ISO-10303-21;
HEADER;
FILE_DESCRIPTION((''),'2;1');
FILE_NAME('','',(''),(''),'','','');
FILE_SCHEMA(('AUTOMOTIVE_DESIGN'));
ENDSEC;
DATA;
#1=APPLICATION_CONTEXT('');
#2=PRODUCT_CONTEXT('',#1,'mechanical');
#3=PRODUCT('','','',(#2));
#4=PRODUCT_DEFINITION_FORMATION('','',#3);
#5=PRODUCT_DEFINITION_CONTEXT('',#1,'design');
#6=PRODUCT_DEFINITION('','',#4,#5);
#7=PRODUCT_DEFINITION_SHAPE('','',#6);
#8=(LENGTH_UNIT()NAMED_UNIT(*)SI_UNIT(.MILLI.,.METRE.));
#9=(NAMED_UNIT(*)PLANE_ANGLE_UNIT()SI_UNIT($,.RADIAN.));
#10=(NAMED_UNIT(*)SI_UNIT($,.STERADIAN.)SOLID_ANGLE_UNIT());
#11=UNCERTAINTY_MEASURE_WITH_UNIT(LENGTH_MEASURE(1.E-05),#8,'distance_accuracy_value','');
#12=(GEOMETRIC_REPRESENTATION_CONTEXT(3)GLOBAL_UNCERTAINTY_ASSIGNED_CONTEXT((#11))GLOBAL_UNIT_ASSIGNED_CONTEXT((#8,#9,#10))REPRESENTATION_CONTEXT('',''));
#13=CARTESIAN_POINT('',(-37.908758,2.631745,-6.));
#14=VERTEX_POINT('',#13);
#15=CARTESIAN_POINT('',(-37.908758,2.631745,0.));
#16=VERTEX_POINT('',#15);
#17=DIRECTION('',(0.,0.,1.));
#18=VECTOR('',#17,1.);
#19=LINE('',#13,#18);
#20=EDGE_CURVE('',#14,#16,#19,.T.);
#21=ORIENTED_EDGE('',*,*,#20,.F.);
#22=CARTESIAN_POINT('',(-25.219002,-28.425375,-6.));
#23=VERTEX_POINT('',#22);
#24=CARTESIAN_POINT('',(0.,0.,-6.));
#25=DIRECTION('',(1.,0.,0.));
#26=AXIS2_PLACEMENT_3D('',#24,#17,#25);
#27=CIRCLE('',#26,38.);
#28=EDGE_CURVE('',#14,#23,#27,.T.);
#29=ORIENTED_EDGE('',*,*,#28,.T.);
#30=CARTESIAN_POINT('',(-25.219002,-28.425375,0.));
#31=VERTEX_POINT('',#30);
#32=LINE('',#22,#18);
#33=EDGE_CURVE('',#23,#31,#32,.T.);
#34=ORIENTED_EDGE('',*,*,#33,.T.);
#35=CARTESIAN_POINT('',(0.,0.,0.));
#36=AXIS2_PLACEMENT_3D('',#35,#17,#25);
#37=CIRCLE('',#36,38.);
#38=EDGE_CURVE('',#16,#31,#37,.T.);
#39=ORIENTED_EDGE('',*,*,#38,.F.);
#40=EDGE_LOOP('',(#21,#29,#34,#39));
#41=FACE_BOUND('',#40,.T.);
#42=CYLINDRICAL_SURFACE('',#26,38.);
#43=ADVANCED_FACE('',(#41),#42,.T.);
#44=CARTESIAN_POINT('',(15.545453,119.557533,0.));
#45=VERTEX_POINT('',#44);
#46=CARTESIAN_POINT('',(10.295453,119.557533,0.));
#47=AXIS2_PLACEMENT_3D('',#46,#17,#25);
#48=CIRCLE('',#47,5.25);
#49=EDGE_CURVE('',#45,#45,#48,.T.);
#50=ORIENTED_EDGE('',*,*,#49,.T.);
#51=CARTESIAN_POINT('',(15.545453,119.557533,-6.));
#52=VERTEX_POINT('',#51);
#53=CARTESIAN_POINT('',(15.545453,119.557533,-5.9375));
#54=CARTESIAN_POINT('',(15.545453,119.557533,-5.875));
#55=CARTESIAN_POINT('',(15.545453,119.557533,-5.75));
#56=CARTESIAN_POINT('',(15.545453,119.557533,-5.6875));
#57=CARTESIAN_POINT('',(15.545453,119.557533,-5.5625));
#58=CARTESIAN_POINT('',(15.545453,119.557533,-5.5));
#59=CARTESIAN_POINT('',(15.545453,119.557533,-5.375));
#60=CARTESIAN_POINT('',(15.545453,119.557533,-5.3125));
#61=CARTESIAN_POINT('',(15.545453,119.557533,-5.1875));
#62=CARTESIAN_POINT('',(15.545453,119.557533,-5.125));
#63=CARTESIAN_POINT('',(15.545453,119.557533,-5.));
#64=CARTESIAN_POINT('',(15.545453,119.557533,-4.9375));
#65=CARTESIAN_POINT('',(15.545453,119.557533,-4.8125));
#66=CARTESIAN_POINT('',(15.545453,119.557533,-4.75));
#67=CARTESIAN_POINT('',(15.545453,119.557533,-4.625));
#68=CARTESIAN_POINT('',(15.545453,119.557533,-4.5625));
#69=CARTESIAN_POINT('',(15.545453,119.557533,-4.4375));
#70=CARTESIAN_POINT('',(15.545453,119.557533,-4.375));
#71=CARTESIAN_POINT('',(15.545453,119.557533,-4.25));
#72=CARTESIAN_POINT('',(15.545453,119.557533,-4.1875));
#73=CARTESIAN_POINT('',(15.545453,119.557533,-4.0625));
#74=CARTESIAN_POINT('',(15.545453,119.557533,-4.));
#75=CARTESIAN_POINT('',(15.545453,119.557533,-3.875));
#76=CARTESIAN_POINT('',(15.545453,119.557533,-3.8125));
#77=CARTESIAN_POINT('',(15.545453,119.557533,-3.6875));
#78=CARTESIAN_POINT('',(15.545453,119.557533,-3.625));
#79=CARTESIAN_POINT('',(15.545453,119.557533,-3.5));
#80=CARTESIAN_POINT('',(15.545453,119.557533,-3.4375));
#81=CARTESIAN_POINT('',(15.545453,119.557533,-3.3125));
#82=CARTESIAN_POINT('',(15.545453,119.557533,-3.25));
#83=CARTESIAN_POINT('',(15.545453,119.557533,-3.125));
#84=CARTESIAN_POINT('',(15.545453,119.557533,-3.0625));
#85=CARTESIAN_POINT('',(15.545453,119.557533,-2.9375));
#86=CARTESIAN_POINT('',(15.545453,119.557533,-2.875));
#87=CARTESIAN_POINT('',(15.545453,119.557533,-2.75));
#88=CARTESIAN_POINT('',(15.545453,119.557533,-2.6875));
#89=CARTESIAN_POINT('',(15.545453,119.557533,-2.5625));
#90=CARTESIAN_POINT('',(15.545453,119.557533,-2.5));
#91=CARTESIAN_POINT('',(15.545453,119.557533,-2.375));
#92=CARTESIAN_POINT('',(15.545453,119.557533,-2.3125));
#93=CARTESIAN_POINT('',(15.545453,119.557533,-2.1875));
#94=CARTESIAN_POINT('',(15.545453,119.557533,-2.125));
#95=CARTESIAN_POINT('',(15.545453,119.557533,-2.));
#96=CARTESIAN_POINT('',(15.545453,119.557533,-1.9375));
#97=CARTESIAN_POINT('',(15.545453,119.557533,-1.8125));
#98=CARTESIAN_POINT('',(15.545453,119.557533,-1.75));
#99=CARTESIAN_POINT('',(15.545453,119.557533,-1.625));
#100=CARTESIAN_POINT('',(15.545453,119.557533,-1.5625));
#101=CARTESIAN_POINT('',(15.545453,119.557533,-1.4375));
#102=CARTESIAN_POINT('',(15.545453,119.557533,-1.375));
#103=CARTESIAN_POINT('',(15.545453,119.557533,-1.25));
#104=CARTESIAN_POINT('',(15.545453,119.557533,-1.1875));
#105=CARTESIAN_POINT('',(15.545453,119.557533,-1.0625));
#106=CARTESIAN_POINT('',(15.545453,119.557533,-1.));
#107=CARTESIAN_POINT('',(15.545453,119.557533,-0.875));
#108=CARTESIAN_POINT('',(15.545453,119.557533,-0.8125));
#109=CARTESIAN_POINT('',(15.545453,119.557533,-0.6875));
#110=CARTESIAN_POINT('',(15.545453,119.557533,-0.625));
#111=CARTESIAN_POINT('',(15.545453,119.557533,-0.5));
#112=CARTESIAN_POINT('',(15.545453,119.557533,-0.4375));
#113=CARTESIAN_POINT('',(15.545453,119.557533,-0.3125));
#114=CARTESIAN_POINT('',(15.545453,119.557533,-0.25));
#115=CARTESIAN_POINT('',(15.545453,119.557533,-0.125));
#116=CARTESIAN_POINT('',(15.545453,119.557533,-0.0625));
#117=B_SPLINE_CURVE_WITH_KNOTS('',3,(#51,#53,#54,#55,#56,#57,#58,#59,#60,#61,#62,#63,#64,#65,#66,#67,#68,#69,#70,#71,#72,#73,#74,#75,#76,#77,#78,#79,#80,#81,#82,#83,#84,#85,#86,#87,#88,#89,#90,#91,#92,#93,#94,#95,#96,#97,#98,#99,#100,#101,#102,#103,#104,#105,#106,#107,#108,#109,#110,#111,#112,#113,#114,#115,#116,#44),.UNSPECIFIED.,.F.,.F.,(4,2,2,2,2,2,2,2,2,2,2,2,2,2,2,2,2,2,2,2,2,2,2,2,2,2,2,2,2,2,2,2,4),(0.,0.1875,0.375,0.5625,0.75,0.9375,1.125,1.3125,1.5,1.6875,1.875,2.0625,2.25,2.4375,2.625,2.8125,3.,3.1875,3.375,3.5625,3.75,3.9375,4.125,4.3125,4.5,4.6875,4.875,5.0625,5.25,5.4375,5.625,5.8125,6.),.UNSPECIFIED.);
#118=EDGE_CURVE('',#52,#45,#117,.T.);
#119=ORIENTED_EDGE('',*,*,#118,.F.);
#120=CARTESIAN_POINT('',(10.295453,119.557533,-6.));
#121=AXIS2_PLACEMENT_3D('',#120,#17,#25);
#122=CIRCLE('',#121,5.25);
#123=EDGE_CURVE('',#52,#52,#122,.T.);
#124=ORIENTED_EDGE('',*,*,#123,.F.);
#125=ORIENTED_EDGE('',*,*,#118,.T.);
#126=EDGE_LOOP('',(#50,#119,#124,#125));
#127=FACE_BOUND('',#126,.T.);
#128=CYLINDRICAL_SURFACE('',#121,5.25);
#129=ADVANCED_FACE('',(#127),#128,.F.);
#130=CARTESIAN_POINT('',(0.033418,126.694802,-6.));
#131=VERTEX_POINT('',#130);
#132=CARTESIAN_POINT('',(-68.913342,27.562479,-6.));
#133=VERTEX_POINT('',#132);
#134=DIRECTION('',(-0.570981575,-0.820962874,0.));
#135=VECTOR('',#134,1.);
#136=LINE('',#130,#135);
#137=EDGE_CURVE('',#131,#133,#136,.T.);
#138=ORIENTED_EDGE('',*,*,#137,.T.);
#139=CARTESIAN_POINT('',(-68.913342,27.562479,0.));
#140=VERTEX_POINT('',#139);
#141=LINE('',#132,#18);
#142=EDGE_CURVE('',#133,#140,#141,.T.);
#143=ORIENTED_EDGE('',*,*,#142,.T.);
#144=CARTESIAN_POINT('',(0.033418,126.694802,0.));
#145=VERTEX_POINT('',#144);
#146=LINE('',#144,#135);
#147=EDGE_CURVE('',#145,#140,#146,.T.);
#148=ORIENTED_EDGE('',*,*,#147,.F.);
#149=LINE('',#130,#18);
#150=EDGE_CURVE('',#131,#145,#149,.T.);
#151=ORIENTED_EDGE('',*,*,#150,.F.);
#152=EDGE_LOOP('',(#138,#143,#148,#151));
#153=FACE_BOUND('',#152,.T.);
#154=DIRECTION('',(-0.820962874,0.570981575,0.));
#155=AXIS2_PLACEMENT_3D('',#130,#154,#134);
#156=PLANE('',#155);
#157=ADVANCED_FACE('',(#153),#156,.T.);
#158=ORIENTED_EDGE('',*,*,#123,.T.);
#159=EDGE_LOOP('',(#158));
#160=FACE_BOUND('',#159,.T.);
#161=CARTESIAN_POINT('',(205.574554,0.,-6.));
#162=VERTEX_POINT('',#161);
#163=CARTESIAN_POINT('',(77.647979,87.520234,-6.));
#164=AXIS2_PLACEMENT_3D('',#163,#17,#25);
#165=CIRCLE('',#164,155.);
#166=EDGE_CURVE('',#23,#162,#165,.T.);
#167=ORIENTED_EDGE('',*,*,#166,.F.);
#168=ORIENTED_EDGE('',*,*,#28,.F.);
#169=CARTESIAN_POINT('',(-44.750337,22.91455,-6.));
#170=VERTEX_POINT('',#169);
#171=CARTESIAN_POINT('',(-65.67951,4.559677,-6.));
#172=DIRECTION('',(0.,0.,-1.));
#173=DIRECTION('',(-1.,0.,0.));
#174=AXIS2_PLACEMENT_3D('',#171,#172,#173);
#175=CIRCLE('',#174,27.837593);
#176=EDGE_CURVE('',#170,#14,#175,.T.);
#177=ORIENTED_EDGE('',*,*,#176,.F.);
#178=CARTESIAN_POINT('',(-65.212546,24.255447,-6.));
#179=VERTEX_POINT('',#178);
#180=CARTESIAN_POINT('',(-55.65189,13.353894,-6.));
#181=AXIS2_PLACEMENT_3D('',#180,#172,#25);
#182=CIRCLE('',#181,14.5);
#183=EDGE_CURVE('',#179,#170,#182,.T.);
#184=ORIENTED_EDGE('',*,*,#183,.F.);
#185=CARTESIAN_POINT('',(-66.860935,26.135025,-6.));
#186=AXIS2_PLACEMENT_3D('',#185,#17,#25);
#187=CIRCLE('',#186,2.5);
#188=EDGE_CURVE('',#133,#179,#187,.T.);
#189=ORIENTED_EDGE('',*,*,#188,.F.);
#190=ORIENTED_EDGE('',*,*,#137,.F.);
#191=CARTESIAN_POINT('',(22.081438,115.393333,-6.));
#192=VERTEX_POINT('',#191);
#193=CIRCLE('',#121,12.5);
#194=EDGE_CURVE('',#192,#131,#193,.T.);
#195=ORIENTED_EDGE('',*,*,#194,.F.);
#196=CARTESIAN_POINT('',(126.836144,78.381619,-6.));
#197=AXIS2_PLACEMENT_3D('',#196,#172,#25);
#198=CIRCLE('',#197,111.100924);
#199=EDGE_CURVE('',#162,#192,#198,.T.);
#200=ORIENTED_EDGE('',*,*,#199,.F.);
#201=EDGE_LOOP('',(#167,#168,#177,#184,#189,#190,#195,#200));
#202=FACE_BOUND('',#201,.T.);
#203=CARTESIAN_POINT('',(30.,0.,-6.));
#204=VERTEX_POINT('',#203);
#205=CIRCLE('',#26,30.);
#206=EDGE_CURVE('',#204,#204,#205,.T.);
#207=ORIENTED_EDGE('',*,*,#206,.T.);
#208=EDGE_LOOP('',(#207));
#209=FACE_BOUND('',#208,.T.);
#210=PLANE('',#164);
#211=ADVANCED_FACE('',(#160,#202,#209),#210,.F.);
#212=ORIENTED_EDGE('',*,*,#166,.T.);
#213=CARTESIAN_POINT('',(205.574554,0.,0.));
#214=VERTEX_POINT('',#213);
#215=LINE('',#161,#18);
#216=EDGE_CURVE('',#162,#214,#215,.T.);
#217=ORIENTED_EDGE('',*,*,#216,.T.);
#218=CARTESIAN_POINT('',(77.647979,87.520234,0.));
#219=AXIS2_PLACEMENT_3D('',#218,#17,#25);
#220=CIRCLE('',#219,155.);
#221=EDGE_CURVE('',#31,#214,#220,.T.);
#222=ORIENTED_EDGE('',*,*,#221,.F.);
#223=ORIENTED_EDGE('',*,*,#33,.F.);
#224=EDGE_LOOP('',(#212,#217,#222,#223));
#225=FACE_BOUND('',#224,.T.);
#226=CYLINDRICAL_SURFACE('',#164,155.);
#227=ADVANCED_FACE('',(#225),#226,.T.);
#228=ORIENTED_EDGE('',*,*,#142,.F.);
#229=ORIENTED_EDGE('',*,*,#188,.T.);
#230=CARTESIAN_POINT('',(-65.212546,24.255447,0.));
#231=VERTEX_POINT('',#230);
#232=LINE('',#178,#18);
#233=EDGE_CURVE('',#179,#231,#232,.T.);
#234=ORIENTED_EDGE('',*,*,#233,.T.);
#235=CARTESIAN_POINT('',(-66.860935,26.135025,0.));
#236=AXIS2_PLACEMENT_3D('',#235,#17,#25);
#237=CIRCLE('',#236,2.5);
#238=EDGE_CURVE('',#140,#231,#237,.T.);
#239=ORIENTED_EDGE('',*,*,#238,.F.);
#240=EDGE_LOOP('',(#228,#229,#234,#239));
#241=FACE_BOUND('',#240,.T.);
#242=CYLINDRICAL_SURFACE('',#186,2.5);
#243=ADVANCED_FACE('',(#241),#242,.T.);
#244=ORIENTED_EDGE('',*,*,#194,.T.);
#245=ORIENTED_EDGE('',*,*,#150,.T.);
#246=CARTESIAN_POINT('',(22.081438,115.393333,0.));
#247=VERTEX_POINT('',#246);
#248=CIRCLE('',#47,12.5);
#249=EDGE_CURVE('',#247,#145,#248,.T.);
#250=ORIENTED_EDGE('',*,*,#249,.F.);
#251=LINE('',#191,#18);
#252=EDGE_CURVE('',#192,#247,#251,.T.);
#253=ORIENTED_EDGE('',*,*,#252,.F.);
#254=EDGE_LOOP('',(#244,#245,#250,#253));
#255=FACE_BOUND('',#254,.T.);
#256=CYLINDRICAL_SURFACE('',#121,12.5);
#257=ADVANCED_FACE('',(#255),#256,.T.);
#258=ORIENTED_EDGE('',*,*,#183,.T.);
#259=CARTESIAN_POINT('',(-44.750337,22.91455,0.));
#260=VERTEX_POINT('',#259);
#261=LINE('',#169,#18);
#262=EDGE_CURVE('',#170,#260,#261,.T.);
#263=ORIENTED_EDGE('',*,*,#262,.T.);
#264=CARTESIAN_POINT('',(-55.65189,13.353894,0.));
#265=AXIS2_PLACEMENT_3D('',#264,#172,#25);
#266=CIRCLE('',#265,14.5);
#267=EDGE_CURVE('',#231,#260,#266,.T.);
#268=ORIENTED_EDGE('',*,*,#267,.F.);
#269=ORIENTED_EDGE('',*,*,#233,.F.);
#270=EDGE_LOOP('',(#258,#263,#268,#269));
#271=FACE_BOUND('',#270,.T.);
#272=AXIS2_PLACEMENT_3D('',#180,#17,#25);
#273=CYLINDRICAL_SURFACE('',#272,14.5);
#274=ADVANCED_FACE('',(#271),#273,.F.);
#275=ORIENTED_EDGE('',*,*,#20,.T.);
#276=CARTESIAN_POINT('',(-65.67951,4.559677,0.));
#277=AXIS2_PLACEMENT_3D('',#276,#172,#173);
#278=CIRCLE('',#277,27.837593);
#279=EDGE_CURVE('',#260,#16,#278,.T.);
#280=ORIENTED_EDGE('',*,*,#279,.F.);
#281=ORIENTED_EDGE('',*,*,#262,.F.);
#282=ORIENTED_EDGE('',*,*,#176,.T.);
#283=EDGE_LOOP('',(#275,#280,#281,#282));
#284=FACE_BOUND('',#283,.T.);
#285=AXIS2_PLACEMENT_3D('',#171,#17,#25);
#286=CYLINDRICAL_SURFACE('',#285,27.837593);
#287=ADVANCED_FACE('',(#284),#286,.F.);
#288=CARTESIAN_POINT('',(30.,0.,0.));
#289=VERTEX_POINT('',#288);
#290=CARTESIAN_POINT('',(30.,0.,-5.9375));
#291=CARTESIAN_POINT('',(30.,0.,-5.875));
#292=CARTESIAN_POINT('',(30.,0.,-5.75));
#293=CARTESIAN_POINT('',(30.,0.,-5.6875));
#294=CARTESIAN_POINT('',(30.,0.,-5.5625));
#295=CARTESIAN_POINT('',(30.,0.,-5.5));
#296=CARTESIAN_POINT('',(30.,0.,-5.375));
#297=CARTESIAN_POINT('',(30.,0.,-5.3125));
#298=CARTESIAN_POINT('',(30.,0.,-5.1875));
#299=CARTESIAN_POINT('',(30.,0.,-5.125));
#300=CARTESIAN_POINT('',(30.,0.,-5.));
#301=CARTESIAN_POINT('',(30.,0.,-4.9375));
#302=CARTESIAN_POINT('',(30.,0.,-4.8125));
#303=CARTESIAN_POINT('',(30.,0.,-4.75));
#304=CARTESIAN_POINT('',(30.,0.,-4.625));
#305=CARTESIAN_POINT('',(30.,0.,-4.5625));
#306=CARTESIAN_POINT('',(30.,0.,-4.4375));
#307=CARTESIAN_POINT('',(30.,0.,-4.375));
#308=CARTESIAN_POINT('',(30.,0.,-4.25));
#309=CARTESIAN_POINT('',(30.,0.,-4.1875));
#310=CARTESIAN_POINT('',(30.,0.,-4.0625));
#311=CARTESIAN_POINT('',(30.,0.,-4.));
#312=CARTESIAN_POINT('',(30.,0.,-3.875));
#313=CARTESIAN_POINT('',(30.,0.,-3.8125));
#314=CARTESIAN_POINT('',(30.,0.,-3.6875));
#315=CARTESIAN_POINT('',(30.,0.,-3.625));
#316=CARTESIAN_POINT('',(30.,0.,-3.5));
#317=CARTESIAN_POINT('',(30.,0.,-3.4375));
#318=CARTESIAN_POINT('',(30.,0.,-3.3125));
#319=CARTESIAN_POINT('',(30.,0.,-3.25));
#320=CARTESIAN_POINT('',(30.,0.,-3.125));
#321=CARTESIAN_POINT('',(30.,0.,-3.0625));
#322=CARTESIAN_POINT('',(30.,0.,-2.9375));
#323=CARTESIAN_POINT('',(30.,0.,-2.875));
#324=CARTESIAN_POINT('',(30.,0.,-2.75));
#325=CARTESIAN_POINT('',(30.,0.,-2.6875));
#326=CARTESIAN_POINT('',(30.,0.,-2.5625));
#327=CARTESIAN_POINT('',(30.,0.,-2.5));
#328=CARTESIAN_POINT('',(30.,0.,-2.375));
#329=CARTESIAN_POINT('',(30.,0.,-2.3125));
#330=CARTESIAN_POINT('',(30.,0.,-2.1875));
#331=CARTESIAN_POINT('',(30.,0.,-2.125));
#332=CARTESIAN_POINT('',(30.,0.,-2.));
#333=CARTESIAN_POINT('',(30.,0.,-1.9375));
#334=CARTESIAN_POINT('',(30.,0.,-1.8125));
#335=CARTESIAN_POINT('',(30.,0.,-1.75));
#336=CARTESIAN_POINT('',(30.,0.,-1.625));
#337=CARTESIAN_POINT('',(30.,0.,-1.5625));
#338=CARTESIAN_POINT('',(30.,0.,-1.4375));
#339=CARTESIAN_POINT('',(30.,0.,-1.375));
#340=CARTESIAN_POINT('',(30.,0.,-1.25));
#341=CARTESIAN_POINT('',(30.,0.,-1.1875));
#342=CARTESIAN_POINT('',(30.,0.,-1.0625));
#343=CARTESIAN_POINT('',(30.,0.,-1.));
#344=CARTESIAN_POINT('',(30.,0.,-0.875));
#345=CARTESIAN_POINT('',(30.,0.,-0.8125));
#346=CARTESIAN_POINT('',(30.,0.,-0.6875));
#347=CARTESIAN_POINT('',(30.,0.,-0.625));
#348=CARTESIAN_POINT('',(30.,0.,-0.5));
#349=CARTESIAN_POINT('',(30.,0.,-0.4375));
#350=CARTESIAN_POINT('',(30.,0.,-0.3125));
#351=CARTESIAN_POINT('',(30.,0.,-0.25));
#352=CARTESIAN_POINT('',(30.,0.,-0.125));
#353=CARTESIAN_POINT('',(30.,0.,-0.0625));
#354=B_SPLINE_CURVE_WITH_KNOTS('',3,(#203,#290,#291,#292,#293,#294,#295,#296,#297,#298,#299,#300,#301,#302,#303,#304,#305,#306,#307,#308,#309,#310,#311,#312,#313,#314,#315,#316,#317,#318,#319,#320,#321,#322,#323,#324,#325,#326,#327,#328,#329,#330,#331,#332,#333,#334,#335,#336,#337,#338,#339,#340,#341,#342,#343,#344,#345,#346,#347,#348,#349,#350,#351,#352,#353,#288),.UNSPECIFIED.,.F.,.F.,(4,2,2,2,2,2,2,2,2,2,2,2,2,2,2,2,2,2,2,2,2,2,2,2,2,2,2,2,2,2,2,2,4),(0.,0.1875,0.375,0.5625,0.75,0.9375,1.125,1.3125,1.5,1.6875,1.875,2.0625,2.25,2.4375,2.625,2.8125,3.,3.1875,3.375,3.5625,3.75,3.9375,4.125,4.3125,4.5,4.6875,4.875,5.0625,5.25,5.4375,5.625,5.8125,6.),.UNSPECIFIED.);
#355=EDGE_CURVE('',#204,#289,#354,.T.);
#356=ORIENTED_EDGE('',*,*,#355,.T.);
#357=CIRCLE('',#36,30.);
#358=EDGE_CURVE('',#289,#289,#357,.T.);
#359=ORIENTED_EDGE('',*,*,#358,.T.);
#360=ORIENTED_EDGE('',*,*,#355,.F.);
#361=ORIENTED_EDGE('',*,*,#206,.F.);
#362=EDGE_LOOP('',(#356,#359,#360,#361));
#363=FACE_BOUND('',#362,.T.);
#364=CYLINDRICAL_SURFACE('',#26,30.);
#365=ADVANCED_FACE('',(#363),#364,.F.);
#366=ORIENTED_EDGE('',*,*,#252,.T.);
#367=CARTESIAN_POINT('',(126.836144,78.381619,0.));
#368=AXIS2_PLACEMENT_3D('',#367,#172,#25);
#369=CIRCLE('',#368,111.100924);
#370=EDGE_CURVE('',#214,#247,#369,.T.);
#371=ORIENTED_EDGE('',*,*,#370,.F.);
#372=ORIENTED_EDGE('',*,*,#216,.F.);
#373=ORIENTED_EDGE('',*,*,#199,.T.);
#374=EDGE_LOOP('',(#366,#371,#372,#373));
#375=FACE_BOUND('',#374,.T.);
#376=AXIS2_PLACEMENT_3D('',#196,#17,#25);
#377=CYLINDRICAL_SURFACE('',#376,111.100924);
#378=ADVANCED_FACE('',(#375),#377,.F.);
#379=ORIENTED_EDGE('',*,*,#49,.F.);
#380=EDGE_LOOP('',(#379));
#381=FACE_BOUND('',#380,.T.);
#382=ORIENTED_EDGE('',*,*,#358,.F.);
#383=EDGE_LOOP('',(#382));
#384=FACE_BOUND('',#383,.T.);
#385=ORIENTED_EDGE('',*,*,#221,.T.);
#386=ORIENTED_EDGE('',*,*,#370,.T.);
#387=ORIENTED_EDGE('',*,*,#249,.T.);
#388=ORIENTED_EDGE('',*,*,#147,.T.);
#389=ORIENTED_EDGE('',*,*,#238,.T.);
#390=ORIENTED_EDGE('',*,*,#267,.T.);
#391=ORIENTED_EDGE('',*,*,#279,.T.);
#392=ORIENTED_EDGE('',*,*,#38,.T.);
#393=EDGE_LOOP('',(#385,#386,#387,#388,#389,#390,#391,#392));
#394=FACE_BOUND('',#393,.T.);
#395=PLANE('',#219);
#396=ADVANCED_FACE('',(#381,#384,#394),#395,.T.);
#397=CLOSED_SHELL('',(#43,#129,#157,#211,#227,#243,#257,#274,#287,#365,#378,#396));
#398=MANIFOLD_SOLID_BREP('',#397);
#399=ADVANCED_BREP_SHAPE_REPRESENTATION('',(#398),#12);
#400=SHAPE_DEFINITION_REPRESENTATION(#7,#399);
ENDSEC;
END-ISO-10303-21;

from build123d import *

# Parameters (mm, degrees)
SKETCH_1_R             = 5.25
SKETCH_1_R_2           = 30
SM_BASE_FLANGE_1_DEPTH = 6


# Sheet-metal steps are written as plain solids
with BuildPart() as part:
    # Sketch 1 → Базовая кромка1 (new body)
    with BuildSketch(Plane.XY):
        with BuildLine():
            Line((0.033417561, 126.694802442), (-68.913342264, 27.562479168))
            ThreePointArc((-68.913342264, 27.562479168), (-68.526745087, 24.270869385), (-65.212546165, 24.255447089))
            ThreePointArc((-65.212546165, 24.255447089), (-54.703732736, 27.822860554), (-44.750337246, 22.914549568))
            ThreePointArc((-44.750337246, 22.914549568), (-39.302081877, 13.457030285), (-37.908757817, 2.63174481))
            ThreePointArc((-37.908757817, 2.63174481), (-35.176905519, -14.373076153), (-25.219001767, -28.425375105))
            ThreePointArc((-25.219001767, -28.425375105), (96.595176943, -66.317354816), (205.574554402, 0))
            ThreePointArc((205.574554402, 0), (67.691260765, -15.667826508), (22.08143844, 115.393333105))
            ThreePointArc((22.08143844, 115.393333105), (15.997331025, 130.681317743), (0.033417561, 126.694802442))
        make_face()
        with Locations((10.295453487, 119.557532751)):
            Circle(SKETCH_1_R, mode=Mode.SUBTRACT)
        Circle(SKETCH_1_R_2, mode=Mode.SUBTRACT)
    extrude(amount=-SM_BASE_FLANGE_1_DEPTH)


solid = part.part
